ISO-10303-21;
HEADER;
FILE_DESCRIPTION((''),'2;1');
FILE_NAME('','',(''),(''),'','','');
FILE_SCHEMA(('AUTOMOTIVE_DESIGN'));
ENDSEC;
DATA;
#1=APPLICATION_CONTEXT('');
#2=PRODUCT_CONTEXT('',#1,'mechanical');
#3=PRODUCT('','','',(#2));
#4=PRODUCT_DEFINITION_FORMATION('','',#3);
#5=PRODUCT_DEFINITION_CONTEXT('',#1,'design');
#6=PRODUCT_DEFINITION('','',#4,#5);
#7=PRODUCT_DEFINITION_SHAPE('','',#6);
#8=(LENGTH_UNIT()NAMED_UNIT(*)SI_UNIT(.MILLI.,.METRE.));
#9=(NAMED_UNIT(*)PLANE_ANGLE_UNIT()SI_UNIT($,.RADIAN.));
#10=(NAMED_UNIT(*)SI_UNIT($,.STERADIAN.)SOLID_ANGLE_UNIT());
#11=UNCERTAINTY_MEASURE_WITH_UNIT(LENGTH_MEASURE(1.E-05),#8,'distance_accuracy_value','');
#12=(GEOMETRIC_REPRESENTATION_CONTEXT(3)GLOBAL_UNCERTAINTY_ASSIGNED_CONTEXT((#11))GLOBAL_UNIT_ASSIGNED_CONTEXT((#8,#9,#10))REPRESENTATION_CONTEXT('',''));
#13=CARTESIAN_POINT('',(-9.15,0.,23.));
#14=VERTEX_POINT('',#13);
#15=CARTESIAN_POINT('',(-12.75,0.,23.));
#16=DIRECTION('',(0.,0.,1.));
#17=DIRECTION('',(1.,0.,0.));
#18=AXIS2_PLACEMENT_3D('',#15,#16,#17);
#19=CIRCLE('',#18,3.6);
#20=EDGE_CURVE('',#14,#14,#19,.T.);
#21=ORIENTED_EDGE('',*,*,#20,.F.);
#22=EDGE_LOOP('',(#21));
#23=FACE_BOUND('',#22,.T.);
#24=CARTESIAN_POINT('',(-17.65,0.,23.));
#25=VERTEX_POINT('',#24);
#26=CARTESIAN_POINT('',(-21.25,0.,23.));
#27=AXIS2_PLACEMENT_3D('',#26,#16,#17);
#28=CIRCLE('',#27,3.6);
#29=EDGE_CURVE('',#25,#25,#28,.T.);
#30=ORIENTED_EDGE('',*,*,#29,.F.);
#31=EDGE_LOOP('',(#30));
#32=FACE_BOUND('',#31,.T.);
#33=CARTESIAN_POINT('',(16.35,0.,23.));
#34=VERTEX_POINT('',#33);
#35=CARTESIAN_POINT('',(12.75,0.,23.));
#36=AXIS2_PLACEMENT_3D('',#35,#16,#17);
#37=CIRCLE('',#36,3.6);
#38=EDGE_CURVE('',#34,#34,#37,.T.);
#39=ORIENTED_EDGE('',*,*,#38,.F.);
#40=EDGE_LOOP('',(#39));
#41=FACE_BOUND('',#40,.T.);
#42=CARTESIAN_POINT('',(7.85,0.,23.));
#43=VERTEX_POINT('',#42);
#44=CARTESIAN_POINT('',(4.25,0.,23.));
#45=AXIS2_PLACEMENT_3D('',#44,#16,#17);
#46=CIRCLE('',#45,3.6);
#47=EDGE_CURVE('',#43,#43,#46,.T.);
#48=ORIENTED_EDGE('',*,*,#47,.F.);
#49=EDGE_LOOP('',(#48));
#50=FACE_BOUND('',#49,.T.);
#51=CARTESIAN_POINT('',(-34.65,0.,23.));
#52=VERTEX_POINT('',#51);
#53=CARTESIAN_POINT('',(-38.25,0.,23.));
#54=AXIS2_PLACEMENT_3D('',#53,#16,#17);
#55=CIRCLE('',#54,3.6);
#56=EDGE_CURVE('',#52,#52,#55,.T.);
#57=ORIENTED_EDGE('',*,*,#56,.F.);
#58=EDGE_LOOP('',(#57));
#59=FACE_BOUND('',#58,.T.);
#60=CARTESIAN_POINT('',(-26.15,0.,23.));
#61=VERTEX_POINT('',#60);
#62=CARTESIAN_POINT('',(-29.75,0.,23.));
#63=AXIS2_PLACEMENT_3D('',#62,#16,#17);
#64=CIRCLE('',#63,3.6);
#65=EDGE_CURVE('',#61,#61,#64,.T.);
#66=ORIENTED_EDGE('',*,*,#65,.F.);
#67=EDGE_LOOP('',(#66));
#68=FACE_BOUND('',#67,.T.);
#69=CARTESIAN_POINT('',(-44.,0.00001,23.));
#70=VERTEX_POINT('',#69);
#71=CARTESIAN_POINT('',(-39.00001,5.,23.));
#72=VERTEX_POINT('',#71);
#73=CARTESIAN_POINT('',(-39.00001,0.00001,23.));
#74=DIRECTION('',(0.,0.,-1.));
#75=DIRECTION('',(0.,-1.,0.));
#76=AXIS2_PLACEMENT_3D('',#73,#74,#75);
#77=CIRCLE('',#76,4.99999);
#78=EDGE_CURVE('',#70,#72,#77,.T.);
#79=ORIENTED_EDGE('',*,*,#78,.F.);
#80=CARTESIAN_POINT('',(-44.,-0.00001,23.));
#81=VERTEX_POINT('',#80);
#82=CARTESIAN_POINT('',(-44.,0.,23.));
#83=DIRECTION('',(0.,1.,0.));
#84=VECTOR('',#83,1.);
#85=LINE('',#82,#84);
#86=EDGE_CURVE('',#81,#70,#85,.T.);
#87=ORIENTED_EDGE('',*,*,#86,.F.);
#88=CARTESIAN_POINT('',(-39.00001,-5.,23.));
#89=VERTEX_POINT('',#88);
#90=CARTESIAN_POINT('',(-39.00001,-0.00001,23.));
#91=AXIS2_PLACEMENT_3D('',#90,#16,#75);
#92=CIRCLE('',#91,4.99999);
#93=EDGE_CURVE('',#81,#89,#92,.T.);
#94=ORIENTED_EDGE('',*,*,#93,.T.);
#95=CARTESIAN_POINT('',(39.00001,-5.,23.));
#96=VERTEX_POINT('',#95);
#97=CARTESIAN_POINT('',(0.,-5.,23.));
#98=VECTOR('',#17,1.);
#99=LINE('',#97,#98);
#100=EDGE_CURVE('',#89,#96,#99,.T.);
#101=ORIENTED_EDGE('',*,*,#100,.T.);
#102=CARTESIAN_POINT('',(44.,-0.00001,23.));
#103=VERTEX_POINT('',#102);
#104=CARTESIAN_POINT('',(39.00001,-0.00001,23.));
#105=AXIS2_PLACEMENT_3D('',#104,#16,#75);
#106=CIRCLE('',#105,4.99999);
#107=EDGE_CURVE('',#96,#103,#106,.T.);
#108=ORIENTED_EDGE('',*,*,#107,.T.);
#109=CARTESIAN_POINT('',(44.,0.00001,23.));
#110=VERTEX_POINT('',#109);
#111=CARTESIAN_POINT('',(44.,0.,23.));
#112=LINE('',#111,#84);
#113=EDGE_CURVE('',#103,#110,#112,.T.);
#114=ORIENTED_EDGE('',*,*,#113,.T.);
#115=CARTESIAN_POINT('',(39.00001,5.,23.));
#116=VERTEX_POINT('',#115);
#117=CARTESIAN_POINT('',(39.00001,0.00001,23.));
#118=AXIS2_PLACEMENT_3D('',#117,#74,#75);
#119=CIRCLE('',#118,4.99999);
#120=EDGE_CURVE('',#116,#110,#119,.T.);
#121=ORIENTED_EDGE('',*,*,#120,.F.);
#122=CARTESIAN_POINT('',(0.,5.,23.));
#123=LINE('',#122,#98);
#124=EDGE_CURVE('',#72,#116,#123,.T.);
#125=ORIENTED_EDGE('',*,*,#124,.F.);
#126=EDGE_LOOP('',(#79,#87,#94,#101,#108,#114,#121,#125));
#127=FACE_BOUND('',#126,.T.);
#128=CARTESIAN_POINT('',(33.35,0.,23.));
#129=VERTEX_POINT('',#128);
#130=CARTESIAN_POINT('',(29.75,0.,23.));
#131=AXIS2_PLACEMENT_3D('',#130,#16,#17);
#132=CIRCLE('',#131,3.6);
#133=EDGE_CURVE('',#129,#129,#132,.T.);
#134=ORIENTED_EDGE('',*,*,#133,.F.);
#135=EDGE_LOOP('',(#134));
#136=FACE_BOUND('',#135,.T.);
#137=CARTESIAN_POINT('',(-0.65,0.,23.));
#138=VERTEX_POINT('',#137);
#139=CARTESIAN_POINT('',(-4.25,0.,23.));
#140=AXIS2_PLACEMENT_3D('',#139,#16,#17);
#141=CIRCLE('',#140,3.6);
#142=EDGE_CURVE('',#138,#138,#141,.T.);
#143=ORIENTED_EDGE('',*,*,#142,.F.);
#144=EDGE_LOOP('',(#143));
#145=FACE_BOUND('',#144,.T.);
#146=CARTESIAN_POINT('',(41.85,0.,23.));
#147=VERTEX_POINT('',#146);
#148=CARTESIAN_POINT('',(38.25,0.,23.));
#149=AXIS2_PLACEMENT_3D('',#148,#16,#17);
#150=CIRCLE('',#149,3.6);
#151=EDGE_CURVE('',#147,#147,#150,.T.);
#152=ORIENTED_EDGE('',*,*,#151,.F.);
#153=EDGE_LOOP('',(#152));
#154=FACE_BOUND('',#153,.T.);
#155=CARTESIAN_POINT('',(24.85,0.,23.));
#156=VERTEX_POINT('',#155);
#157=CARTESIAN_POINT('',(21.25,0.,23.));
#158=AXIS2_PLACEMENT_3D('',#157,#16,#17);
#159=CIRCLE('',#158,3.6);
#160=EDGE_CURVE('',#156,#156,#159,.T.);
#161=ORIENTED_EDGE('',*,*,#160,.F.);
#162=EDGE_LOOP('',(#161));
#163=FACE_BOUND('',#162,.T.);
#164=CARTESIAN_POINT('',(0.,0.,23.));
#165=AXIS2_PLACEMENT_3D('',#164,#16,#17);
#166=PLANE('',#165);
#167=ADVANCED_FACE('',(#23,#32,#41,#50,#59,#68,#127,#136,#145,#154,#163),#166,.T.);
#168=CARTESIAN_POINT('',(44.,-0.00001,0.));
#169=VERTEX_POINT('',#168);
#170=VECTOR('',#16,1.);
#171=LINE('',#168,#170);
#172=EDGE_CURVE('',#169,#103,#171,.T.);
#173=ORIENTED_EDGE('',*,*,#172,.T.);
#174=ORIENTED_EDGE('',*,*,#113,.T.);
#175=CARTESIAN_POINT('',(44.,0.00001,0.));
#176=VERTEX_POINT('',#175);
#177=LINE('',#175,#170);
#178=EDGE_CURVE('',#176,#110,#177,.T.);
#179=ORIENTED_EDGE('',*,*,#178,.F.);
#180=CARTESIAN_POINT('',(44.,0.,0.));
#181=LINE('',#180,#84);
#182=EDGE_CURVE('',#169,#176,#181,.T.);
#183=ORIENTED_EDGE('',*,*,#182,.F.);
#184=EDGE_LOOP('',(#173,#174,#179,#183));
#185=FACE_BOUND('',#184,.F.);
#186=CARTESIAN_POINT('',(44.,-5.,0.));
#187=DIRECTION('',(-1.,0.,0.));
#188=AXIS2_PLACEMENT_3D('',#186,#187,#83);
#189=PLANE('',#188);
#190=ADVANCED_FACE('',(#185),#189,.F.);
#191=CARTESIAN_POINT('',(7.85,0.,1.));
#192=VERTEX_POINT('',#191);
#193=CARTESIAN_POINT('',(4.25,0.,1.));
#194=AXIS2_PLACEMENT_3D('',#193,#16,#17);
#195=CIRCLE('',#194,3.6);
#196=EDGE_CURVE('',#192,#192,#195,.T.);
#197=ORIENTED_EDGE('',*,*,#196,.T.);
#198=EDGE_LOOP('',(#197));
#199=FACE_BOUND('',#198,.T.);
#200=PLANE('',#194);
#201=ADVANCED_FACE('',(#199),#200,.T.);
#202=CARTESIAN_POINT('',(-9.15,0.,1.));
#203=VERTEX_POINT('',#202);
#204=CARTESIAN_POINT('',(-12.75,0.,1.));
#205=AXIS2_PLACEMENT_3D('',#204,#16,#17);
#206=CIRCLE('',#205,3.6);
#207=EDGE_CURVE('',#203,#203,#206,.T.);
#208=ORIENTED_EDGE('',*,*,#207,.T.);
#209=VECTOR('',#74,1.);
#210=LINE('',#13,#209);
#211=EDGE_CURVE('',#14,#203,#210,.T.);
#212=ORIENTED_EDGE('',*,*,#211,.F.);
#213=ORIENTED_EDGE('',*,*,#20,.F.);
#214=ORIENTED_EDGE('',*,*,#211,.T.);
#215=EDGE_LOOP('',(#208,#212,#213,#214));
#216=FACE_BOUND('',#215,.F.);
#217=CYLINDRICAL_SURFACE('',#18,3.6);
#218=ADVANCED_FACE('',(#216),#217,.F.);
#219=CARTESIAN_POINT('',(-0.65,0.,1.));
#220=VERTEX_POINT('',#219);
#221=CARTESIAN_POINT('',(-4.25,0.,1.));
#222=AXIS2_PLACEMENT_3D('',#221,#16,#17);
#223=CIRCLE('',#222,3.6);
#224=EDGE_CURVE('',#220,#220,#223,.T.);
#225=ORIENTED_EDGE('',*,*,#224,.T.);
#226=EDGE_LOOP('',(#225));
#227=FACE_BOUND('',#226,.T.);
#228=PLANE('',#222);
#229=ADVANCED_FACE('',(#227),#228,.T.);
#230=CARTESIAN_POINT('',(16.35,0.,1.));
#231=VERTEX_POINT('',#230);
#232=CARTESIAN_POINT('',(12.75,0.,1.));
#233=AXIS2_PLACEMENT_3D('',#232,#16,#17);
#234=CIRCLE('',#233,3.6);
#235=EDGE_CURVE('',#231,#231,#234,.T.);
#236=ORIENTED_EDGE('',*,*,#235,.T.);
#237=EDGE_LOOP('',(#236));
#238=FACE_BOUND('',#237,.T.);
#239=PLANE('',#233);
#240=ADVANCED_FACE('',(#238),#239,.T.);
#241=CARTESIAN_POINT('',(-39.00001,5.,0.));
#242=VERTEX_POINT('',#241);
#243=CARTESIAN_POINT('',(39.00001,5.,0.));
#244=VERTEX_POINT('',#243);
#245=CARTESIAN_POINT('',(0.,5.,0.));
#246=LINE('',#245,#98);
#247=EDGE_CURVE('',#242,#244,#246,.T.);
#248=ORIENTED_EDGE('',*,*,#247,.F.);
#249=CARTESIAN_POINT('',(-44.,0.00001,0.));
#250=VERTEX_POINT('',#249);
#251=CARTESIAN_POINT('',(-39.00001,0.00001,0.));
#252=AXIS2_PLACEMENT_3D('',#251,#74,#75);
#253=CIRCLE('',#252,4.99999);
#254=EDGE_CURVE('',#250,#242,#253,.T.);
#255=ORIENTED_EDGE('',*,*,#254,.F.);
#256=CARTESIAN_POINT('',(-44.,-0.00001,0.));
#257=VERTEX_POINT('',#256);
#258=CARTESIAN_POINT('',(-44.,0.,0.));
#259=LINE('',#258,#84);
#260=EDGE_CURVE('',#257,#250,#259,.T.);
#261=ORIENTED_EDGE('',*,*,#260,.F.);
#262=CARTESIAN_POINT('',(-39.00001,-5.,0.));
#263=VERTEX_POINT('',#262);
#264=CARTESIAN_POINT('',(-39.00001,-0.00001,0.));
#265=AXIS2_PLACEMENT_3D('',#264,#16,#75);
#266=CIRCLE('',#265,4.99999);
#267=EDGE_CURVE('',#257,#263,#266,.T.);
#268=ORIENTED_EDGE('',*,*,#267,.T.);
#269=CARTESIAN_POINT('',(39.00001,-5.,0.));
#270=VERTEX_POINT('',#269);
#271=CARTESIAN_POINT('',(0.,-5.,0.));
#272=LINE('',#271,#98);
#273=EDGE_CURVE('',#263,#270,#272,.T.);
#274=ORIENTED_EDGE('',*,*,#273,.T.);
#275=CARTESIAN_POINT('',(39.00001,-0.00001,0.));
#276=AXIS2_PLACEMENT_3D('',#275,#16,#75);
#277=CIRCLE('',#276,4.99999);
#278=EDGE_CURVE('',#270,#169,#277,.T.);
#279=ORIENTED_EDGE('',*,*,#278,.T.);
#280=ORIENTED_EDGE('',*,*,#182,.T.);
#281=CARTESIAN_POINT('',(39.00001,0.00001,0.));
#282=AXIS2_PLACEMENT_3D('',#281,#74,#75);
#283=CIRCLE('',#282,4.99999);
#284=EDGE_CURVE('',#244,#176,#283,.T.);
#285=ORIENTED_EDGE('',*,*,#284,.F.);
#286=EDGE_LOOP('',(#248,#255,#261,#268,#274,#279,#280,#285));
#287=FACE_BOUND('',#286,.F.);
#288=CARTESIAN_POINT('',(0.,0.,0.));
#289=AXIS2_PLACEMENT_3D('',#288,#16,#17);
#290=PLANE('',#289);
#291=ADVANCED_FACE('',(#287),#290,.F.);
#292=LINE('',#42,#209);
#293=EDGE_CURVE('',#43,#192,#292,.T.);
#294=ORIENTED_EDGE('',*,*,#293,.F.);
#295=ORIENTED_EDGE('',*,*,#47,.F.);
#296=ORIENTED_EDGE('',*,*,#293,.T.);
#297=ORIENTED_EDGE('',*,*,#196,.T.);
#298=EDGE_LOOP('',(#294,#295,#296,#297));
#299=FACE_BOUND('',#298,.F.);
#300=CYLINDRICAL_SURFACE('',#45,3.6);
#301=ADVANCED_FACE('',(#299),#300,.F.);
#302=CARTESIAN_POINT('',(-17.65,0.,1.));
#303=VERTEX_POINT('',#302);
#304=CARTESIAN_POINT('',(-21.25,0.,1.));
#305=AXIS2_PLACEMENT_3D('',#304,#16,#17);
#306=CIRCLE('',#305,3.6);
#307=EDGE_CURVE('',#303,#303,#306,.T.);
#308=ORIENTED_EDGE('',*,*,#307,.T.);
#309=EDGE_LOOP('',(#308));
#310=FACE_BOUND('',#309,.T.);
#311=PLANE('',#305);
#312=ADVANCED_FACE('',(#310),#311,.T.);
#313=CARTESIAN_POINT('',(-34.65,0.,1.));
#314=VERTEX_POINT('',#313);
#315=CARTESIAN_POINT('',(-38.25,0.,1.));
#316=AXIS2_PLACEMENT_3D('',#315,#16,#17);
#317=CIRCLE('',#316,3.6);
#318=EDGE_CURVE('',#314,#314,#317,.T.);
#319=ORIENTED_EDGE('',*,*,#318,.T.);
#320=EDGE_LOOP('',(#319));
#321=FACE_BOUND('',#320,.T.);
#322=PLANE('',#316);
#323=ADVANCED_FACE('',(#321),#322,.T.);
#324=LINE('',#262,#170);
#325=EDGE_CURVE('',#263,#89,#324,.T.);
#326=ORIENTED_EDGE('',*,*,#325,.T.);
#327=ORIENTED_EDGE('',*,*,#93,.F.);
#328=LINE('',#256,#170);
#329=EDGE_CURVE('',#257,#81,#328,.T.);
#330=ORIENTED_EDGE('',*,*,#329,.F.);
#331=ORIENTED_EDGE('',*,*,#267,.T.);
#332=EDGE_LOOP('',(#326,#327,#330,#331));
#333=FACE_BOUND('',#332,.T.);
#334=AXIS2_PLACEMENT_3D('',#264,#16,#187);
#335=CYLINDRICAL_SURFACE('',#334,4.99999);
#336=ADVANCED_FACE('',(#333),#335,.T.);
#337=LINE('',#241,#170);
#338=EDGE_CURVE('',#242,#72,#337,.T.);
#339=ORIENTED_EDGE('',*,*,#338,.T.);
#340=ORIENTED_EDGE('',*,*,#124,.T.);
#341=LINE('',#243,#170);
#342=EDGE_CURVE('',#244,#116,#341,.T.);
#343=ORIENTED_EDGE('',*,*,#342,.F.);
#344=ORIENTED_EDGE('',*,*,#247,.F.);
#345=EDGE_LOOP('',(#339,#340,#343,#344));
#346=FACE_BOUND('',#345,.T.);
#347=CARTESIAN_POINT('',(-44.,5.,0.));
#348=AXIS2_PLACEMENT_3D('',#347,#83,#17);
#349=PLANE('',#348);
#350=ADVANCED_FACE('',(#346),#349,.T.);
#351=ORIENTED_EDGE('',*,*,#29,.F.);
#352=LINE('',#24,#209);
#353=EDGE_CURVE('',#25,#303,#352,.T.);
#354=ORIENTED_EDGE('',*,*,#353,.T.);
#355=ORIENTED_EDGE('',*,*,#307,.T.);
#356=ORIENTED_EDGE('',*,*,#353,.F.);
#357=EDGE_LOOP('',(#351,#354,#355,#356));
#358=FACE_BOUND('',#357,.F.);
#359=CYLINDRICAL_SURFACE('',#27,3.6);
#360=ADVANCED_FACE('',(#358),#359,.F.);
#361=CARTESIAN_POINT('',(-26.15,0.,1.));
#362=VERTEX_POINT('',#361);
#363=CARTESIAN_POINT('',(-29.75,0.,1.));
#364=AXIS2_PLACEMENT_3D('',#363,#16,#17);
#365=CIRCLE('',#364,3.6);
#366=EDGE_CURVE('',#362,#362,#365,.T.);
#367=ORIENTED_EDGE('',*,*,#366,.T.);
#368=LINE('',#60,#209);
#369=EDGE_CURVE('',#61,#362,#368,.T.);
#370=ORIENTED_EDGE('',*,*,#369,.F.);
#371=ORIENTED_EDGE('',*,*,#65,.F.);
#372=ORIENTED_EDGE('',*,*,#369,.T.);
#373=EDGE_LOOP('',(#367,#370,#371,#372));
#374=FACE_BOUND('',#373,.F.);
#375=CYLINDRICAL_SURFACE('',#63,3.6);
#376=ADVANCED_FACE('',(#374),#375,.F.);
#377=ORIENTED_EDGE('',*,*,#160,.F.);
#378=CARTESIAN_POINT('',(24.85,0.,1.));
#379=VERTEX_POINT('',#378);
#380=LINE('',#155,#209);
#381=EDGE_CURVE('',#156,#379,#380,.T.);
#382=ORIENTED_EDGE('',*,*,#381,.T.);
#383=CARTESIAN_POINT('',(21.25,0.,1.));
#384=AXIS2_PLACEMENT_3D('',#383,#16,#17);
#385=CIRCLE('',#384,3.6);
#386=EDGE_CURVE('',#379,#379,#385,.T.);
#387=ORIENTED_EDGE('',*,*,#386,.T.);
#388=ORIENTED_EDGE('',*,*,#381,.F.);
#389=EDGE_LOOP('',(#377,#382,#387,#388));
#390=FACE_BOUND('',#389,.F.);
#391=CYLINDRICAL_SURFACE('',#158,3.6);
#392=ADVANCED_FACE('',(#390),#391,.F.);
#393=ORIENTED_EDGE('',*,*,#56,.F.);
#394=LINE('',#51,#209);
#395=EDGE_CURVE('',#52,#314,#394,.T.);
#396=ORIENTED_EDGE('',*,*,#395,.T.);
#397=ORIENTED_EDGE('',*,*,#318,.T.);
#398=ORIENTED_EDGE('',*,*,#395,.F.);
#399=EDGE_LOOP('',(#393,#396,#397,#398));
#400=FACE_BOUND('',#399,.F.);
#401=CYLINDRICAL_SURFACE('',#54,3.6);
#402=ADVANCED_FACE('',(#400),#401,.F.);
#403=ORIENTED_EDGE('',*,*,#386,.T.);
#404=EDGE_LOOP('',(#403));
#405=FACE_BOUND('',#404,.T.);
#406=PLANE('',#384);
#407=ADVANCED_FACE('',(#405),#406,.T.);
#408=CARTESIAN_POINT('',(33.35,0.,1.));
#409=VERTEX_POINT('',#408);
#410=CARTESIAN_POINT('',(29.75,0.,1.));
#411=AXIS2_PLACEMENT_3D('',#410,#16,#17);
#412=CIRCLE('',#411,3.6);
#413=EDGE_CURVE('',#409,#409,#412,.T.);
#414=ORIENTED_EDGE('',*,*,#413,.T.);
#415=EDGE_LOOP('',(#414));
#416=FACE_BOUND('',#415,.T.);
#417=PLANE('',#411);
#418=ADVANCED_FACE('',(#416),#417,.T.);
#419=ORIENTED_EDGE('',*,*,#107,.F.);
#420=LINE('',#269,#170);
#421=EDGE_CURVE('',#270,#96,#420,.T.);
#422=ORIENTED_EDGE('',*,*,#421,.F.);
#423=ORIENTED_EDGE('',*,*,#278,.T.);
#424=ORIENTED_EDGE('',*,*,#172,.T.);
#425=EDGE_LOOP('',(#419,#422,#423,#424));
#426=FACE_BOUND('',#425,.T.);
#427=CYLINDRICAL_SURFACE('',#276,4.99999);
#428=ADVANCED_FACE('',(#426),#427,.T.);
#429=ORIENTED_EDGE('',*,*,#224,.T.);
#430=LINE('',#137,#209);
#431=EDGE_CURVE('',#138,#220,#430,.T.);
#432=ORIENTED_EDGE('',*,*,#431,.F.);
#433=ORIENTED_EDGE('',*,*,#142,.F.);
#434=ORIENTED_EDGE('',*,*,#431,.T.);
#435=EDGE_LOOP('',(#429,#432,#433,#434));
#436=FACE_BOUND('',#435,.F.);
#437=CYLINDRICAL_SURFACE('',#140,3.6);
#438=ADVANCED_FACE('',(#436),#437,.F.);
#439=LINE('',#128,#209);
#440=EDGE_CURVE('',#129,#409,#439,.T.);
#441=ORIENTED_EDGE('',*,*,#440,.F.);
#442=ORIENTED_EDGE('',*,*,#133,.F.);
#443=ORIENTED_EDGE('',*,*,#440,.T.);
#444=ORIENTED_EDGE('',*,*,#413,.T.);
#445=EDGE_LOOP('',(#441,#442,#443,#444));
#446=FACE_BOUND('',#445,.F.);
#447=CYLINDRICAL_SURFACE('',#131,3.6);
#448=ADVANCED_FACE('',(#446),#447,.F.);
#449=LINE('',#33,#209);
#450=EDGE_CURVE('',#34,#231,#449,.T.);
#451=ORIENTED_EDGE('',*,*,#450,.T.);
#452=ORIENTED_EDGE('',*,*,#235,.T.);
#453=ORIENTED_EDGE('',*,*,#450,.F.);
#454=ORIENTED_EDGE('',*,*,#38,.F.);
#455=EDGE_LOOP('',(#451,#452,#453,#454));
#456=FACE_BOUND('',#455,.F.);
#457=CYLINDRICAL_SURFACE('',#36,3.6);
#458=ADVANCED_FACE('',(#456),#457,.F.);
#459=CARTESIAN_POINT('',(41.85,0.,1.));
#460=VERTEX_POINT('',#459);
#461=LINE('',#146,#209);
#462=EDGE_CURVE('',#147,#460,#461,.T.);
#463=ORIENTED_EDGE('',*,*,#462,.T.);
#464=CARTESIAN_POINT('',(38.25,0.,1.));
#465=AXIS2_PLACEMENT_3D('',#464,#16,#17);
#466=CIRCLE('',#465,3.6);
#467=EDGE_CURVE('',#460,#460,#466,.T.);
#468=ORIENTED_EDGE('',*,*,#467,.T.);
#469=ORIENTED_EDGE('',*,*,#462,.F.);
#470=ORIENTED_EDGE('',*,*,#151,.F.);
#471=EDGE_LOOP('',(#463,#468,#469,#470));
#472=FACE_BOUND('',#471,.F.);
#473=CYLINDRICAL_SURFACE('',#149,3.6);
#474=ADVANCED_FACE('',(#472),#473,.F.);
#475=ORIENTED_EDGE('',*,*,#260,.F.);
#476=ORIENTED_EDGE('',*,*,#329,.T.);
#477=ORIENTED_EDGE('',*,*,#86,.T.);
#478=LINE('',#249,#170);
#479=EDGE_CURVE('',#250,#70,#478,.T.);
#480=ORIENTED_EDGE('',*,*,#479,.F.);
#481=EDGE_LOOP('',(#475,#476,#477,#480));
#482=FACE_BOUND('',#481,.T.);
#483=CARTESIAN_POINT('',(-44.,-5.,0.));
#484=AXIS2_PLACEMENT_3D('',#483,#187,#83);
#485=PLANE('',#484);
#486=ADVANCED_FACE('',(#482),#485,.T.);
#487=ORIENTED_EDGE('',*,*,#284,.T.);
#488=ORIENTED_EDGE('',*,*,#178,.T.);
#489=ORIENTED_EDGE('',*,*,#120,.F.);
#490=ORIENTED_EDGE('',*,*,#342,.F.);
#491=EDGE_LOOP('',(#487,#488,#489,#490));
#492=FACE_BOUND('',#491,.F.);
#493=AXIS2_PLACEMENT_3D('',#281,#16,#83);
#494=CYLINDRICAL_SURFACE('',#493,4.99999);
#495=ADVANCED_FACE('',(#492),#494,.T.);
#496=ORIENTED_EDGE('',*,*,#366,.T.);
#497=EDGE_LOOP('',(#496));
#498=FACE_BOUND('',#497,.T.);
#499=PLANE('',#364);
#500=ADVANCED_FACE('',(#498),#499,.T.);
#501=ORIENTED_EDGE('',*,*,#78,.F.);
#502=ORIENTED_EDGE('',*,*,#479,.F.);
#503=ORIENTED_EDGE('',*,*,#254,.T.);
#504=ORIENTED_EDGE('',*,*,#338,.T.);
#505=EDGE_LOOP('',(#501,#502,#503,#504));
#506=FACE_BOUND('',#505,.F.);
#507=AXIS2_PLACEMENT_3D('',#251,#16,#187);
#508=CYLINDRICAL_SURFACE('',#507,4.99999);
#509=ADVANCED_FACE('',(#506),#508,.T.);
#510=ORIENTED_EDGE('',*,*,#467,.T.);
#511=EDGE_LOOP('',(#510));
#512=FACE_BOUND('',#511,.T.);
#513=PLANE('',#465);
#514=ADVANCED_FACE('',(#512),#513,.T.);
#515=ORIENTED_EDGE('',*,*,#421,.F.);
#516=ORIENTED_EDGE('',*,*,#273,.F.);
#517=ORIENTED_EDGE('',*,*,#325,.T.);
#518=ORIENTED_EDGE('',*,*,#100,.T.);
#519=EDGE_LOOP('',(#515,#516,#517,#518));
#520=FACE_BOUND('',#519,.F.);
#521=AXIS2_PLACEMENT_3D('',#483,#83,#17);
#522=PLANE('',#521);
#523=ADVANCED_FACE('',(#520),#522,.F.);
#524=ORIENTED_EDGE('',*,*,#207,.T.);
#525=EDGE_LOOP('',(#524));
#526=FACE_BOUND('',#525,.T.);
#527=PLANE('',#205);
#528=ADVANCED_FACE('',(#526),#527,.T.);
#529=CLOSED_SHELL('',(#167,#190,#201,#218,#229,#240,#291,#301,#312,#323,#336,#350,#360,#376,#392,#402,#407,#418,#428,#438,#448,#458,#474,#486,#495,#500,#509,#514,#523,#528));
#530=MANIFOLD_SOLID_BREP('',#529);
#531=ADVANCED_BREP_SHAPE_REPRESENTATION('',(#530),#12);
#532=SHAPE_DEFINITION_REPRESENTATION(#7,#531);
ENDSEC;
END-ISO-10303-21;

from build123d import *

# Parameters (mm, degrees)
F0_W     = 88
F0_H     = 10
F1_DEPTH = 23
F2_R     = 3.6
F3_DEPTH = 22
F4_R     = 4.99999


# Not quite as in the source:
# - a fillet or chamfer is up to 0.001 mm smaller than in the source, because OpenCascade refuses the exact size


with BuildPart() as f1:
    # F0 (on Top) → F1 (new body)
    with BuildSketch(Plane.XY):
        Rectangle(F0_W, F0_H)
    extrude(amount=F1_DEPTH)

    # F2 (on face) → F3 (cut)
    with BuildSketch(Plane.XY.offset(23)):
        with Locations((-38.25, 0)):
            Circle(F2_R)
        with Locations((-29.75, 0)):
            Circle(F2_R)
        with Locations((-21.25, 0)):
            Circle(F2_R)
        with Locations((-12.75, 0)):
            Circle(F2_R)
        with Locations((-4.25, 0)):
            Circle(F2_R)
        with Locations((4.25, 0)):
            Circle(F2_R)
        with Locations((12.75, 0)):
            Circle(F2_R)
        with Locations((21.25, 0)):
            Circle(F2_R)
        with Locations((29.75, 0)):
            Circle(F2_R)
        with Locations((38.25, 0)):
            Circle(F2_R)
    extrude(amount=-F3_DEPTH, mode=Mode.SUBTRACT)

    # F4 (radius 5 in the source; OpenCascade refuses exactly that, so slightly less here)
    f4_edges = [f1.edges().sort_by_distance(p)[0] for p in [
        (44, 5, 11.5),
        (44, -5, 11.5),
        (-44, -5, 11.5),
        (-44, 5, 11.5),
    ]]
    fillet(f4_edges, radius=F4_R)


solid = f1.part
